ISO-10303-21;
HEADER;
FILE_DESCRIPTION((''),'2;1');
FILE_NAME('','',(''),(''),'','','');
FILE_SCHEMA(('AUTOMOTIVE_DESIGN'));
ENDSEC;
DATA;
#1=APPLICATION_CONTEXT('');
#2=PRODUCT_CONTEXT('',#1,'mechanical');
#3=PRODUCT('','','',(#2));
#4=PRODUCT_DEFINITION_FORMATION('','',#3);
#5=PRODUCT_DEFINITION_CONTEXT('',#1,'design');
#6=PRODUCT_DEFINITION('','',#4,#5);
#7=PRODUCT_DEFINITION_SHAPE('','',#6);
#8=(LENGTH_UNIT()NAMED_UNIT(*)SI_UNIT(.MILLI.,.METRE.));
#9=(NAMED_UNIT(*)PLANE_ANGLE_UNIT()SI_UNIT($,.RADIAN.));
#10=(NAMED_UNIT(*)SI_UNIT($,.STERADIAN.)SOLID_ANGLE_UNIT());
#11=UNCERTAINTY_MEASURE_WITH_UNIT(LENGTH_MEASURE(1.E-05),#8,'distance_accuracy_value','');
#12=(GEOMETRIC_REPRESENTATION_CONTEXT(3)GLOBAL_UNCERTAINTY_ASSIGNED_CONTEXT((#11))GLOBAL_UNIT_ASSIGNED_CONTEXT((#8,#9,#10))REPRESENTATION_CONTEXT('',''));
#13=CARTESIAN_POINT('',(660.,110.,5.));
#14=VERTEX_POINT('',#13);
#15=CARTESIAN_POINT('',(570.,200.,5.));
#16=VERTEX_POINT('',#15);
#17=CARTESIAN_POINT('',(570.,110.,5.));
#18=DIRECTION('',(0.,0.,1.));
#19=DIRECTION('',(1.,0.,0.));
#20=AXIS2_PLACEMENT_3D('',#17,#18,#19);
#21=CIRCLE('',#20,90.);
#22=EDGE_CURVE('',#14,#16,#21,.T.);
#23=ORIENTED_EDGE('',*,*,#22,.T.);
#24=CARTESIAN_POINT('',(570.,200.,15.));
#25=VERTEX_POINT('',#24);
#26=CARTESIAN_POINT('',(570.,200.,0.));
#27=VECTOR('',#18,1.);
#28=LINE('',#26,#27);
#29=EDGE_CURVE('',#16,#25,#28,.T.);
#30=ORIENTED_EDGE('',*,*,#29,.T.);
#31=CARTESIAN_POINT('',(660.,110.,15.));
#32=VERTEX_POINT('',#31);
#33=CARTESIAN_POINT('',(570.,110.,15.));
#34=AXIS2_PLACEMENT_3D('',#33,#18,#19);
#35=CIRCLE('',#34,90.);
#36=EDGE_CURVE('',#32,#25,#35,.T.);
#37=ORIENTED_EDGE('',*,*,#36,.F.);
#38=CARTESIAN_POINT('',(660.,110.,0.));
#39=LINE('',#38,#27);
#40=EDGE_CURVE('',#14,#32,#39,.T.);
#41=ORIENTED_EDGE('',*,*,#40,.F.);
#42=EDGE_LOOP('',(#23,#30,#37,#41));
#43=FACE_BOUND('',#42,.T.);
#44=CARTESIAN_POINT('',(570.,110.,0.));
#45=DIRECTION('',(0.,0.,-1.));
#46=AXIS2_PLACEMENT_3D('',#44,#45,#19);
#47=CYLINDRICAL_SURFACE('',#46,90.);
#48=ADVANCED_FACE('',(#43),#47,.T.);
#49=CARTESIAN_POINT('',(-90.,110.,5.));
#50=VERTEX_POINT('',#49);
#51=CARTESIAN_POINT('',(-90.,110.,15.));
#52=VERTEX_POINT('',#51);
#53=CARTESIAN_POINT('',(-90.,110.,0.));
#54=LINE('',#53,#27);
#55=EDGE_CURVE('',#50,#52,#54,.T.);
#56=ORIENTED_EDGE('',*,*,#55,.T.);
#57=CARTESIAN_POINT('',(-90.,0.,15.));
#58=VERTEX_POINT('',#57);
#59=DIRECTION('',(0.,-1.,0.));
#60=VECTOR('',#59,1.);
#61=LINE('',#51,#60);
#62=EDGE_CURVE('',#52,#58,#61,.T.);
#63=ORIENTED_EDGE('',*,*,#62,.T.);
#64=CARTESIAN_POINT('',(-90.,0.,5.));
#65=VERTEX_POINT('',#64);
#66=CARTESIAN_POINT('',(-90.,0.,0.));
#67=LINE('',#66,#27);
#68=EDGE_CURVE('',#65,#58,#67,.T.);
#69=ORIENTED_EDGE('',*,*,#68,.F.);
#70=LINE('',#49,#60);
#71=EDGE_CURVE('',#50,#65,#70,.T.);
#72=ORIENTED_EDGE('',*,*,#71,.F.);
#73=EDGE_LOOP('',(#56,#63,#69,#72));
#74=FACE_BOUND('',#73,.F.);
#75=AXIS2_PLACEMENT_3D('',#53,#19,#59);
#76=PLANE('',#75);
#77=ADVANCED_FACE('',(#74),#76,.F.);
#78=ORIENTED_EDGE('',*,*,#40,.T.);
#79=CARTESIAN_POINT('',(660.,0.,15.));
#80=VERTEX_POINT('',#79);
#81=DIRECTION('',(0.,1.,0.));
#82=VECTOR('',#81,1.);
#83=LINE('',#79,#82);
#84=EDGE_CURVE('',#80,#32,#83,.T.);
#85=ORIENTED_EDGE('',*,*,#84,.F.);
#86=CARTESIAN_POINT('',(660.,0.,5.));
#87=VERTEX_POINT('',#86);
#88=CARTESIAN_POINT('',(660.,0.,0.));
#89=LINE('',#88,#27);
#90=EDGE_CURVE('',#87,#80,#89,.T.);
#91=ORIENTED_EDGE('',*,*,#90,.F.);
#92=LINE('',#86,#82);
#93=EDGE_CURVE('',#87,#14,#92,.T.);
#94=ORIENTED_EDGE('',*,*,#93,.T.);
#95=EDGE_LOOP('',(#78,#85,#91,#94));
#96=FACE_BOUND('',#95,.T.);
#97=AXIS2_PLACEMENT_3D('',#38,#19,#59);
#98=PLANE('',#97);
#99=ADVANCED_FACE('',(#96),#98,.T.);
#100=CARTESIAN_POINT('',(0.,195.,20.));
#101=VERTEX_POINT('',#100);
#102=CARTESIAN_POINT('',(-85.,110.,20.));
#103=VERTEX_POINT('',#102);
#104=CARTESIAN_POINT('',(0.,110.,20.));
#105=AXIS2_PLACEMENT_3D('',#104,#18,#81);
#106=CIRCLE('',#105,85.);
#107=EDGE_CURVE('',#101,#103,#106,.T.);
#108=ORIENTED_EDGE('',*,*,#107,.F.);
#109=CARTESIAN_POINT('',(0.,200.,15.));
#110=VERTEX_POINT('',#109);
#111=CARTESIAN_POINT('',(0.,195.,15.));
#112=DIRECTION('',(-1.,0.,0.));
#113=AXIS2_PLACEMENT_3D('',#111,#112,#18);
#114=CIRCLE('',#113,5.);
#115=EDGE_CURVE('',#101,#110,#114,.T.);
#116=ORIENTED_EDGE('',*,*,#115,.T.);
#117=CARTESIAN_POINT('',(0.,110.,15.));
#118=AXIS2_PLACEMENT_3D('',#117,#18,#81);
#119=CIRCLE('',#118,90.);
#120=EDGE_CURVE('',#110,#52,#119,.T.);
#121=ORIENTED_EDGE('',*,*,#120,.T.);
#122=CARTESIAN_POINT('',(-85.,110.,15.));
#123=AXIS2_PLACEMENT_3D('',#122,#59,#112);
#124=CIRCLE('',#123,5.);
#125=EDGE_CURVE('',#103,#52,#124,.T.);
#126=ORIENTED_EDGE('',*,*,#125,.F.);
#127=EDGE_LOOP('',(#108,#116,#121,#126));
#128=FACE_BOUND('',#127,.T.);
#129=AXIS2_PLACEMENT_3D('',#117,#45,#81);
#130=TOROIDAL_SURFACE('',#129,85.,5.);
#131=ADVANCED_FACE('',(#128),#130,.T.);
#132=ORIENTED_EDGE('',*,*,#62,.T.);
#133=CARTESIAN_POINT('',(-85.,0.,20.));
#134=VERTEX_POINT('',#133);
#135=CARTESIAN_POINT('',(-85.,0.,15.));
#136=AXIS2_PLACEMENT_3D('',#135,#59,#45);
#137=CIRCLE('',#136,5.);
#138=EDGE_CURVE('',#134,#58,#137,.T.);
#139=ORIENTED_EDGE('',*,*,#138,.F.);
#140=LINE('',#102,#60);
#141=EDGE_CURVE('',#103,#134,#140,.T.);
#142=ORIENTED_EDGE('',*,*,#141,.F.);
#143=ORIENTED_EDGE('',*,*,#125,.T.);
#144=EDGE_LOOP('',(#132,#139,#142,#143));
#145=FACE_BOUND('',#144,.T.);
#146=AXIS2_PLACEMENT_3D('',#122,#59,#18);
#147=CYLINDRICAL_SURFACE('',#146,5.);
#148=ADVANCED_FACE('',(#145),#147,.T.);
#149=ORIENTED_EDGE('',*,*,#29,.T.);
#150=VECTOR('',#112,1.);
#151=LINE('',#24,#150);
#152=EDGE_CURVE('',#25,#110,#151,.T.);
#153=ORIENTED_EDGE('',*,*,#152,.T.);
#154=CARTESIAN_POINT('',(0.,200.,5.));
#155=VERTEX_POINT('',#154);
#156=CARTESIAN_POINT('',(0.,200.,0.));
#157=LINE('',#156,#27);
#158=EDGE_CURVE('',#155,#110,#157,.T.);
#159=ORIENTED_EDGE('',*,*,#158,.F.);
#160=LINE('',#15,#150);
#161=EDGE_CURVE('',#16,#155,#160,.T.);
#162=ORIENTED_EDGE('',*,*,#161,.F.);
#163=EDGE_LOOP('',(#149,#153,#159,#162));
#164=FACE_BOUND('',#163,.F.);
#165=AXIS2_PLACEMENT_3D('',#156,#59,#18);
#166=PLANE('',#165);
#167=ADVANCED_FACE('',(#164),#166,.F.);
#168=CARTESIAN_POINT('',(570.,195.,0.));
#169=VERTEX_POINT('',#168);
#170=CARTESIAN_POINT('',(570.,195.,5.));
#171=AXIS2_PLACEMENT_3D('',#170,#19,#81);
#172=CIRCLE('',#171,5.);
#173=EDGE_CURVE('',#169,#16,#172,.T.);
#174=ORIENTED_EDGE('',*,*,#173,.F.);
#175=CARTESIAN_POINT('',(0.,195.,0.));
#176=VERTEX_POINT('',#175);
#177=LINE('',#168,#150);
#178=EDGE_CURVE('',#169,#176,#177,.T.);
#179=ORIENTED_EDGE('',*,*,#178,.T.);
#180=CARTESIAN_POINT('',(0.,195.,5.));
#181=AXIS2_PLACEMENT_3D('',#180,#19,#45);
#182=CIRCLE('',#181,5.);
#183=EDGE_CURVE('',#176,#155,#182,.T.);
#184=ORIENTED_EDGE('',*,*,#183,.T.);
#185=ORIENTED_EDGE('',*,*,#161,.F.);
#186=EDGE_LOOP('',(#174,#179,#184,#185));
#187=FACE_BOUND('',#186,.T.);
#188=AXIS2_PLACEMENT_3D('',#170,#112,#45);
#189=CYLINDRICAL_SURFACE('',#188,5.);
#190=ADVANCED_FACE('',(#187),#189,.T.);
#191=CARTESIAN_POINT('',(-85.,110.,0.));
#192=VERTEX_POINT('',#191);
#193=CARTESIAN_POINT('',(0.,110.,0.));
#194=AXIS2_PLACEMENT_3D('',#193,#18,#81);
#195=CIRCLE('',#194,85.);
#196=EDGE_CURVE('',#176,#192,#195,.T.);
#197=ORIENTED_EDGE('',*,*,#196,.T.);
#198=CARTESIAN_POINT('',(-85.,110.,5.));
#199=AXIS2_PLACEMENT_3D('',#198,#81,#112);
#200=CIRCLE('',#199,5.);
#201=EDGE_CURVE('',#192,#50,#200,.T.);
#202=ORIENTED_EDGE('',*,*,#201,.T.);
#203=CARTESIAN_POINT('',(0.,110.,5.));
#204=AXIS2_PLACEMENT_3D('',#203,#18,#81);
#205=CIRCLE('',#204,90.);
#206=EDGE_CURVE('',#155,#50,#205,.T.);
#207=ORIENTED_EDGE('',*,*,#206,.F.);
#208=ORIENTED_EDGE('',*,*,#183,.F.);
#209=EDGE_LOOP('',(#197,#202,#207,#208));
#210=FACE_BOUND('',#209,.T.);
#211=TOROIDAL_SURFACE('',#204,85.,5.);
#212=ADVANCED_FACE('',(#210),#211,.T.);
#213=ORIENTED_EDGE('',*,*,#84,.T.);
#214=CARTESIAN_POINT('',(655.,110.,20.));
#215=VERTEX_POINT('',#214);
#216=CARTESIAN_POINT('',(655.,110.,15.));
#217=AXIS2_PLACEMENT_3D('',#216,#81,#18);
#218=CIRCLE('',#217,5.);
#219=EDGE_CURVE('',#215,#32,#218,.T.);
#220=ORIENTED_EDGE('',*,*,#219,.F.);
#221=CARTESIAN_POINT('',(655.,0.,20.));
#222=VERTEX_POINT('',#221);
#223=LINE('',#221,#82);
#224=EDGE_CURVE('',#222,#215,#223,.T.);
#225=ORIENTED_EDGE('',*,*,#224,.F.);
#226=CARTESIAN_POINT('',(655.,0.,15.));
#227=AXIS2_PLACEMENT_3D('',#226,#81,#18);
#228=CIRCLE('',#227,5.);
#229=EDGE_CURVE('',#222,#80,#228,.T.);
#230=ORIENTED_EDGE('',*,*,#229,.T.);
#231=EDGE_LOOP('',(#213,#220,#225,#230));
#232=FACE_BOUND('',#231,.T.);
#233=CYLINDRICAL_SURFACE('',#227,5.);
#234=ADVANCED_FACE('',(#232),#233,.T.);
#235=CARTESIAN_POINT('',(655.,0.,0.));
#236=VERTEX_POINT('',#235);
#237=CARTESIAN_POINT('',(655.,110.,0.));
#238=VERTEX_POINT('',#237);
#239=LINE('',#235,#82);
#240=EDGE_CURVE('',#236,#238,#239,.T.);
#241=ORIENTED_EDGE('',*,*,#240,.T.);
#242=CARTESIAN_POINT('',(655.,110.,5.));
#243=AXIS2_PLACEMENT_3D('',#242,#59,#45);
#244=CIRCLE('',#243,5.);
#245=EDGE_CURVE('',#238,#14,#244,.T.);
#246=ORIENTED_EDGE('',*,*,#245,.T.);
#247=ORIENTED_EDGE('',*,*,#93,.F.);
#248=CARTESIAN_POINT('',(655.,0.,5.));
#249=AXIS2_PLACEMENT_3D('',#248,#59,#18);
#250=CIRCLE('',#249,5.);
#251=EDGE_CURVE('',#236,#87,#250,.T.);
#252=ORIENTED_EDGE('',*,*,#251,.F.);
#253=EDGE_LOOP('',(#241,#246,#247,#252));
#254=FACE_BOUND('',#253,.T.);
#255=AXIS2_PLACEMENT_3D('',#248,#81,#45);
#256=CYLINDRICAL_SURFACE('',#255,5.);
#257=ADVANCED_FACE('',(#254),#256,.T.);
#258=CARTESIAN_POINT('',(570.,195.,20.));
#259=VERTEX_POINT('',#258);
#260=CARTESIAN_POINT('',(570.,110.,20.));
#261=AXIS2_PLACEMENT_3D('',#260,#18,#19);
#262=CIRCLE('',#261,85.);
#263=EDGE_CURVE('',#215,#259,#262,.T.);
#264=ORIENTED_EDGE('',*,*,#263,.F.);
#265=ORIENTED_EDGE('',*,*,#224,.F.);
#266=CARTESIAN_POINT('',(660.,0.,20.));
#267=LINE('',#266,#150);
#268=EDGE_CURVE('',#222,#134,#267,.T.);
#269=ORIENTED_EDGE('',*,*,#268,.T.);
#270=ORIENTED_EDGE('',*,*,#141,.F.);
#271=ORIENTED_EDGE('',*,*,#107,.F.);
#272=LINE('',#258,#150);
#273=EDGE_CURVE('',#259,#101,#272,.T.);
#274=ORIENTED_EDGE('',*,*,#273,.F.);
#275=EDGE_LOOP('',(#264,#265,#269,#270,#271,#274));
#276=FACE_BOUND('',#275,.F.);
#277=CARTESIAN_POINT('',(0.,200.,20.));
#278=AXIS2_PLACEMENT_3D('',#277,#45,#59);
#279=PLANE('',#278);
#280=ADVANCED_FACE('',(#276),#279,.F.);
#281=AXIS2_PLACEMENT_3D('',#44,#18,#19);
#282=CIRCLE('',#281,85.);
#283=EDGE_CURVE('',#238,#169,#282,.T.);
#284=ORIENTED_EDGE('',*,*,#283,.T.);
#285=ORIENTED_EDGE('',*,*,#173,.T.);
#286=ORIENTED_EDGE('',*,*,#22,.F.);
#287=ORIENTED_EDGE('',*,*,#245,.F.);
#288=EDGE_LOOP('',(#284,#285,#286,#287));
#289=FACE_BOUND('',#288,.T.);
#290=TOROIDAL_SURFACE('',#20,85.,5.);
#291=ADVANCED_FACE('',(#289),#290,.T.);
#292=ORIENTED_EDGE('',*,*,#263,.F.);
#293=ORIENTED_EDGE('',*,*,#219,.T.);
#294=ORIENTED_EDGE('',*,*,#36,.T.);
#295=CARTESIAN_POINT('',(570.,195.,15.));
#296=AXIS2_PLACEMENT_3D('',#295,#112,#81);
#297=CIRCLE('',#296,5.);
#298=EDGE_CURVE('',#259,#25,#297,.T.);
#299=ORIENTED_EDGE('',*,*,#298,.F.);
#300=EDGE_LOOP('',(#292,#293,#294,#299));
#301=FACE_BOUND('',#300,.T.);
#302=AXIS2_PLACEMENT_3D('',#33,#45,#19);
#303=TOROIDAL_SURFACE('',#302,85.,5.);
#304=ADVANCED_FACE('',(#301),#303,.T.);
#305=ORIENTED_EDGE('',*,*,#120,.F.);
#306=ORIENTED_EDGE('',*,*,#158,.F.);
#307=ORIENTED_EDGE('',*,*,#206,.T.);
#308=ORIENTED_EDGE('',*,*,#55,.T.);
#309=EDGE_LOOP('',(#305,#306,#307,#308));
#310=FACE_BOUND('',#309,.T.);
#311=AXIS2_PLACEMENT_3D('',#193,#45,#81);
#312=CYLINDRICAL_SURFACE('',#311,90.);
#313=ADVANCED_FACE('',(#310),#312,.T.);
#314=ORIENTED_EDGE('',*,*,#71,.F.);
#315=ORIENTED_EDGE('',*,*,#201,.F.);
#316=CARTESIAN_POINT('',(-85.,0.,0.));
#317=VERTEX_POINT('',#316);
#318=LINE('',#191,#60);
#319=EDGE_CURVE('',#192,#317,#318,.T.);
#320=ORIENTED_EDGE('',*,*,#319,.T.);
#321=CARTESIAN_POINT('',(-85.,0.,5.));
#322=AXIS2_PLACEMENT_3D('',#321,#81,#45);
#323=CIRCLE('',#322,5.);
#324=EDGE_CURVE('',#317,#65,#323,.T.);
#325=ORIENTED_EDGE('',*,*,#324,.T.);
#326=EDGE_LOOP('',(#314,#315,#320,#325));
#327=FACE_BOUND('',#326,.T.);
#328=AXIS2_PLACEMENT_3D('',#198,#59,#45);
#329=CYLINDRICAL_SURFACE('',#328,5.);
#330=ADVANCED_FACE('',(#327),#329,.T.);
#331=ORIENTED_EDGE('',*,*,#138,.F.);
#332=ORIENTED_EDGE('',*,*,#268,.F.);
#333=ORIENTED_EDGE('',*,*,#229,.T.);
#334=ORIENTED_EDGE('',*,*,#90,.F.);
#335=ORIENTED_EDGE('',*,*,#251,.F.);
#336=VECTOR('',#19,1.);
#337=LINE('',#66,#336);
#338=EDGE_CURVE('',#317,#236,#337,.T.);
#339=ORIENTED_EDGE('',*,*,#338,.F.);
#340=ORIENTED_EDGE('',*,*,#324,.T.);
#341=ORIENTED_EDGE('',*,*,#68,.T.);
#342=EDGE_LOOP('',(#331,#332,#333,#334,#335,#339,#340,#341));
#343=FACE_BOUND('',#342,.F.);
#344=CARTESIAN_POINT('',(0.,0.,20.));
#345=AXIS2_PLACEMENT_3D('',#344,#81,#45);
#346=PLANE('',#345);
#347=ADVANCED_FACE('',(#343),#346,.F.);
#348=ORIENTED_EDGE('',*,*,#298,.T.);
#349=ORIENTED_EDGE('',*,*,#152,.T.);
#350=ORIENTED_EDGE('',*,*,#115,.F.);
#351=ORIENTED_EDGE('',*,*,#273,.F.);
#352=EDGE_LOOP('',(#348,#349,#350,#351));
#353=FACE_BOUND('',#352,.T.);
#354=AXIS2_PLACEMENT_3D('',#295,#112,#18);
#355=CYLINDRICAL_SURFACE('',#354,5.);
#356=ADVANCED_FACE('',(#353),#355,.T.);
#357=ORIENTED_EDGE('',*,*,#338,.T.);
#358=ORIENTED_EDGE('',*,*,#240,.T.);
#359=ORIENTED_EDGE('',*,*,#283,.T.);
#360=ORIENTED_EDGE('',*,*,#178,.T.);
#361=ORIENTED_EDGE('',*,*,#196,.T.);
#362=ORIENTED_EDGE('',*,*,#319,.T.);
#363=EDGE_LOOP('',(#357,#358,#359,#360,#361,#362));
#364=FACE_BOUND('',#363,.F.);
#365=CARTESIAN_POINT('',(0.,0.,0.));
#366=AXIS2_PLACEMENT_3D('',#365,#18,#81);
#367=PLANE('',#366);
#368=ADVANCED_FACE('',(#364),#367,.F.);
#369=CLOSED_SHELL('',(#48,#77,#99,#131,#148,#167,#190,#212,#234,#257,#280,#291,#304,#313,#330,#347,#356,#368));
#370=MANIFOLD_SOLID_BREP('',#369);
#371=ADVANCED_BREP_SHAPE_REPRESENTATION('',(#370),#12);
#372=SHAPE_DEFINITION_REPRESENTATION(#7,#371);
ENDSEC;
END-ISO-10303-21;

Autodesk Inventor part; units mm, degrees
ref_plane "YZ Plane" through (0, 0, 0) normal (1, 0, 0) x (0, 1, 0)
ref_plane "XZ Plane" through (0, 0, 0) normal (0, 1, 0) x (-1, 0, 0)
ref_plane "XY Plane" through (0, 0, 0) normal (0, 0, 1) x (1, 0, 0)
sketch "Sketch1" plane through (0, 0, 0) normal (1, 0, 0) x (0, 1, 0)
  line L0 (0, 0) -> (200, 0)
  line L1 (200, 0) -> (200, 20)
  line L2 (200, 20) -> (0, 20)
  line L3 (0, 20) -> (0, 0)
  dimension "d0" = 200
  dimension "d1" = 20
extrude "Extrusion1" add sketch "Sketch1" along normal blind 570
sketch "Sketch2" plane through (0, 0, 0) normal (0, 0, 1) x (1, 0, 0)
  line L0 (0, 200) -> (0, 0) projected
  line L1 (570, 200) -> (570, 0) projected
  line L2 (-90, 110) -> (-90, 0)
  line L3 (-90, 0) -> (0, 0)
  line L4 (0, 200) -> (0, 0)
  line L5 (570, 0) -> (570, 200)
  line L6 (660, 110) -> (660, 0)
  line L7 (660, 0) -> (570, 0)
  arc A0 (0, 200) -> (-90, 110) centre (0, 110) ccw
  arc A1 (660, 110) -> (570, 200) centre (570, 110) ccw
  point P0 (-40.5768, 141.5092)
  point P1 (615, 155)
  dimension "d11" = 90
  dimension "d12" = 90
extrude "Extrusion2" add sketch "Sketch2" along normal blind 20
fillet "Fillet1" radius 5 13 edges at (-90, 55, 20) (-63.6396, 173.6396, 20) (285, 200, 20) (633.6396, 173.6396, 0) (570, 200, 10) (660, 55, 0) (660, 110, 10) (-63.6396, 173.6396, 0) (0, 200, 10) (-90, 55, 0) (-90, 110, 10) (285, 200, 0) (660, 55, 20)
properties part number "Centre Wedge"
